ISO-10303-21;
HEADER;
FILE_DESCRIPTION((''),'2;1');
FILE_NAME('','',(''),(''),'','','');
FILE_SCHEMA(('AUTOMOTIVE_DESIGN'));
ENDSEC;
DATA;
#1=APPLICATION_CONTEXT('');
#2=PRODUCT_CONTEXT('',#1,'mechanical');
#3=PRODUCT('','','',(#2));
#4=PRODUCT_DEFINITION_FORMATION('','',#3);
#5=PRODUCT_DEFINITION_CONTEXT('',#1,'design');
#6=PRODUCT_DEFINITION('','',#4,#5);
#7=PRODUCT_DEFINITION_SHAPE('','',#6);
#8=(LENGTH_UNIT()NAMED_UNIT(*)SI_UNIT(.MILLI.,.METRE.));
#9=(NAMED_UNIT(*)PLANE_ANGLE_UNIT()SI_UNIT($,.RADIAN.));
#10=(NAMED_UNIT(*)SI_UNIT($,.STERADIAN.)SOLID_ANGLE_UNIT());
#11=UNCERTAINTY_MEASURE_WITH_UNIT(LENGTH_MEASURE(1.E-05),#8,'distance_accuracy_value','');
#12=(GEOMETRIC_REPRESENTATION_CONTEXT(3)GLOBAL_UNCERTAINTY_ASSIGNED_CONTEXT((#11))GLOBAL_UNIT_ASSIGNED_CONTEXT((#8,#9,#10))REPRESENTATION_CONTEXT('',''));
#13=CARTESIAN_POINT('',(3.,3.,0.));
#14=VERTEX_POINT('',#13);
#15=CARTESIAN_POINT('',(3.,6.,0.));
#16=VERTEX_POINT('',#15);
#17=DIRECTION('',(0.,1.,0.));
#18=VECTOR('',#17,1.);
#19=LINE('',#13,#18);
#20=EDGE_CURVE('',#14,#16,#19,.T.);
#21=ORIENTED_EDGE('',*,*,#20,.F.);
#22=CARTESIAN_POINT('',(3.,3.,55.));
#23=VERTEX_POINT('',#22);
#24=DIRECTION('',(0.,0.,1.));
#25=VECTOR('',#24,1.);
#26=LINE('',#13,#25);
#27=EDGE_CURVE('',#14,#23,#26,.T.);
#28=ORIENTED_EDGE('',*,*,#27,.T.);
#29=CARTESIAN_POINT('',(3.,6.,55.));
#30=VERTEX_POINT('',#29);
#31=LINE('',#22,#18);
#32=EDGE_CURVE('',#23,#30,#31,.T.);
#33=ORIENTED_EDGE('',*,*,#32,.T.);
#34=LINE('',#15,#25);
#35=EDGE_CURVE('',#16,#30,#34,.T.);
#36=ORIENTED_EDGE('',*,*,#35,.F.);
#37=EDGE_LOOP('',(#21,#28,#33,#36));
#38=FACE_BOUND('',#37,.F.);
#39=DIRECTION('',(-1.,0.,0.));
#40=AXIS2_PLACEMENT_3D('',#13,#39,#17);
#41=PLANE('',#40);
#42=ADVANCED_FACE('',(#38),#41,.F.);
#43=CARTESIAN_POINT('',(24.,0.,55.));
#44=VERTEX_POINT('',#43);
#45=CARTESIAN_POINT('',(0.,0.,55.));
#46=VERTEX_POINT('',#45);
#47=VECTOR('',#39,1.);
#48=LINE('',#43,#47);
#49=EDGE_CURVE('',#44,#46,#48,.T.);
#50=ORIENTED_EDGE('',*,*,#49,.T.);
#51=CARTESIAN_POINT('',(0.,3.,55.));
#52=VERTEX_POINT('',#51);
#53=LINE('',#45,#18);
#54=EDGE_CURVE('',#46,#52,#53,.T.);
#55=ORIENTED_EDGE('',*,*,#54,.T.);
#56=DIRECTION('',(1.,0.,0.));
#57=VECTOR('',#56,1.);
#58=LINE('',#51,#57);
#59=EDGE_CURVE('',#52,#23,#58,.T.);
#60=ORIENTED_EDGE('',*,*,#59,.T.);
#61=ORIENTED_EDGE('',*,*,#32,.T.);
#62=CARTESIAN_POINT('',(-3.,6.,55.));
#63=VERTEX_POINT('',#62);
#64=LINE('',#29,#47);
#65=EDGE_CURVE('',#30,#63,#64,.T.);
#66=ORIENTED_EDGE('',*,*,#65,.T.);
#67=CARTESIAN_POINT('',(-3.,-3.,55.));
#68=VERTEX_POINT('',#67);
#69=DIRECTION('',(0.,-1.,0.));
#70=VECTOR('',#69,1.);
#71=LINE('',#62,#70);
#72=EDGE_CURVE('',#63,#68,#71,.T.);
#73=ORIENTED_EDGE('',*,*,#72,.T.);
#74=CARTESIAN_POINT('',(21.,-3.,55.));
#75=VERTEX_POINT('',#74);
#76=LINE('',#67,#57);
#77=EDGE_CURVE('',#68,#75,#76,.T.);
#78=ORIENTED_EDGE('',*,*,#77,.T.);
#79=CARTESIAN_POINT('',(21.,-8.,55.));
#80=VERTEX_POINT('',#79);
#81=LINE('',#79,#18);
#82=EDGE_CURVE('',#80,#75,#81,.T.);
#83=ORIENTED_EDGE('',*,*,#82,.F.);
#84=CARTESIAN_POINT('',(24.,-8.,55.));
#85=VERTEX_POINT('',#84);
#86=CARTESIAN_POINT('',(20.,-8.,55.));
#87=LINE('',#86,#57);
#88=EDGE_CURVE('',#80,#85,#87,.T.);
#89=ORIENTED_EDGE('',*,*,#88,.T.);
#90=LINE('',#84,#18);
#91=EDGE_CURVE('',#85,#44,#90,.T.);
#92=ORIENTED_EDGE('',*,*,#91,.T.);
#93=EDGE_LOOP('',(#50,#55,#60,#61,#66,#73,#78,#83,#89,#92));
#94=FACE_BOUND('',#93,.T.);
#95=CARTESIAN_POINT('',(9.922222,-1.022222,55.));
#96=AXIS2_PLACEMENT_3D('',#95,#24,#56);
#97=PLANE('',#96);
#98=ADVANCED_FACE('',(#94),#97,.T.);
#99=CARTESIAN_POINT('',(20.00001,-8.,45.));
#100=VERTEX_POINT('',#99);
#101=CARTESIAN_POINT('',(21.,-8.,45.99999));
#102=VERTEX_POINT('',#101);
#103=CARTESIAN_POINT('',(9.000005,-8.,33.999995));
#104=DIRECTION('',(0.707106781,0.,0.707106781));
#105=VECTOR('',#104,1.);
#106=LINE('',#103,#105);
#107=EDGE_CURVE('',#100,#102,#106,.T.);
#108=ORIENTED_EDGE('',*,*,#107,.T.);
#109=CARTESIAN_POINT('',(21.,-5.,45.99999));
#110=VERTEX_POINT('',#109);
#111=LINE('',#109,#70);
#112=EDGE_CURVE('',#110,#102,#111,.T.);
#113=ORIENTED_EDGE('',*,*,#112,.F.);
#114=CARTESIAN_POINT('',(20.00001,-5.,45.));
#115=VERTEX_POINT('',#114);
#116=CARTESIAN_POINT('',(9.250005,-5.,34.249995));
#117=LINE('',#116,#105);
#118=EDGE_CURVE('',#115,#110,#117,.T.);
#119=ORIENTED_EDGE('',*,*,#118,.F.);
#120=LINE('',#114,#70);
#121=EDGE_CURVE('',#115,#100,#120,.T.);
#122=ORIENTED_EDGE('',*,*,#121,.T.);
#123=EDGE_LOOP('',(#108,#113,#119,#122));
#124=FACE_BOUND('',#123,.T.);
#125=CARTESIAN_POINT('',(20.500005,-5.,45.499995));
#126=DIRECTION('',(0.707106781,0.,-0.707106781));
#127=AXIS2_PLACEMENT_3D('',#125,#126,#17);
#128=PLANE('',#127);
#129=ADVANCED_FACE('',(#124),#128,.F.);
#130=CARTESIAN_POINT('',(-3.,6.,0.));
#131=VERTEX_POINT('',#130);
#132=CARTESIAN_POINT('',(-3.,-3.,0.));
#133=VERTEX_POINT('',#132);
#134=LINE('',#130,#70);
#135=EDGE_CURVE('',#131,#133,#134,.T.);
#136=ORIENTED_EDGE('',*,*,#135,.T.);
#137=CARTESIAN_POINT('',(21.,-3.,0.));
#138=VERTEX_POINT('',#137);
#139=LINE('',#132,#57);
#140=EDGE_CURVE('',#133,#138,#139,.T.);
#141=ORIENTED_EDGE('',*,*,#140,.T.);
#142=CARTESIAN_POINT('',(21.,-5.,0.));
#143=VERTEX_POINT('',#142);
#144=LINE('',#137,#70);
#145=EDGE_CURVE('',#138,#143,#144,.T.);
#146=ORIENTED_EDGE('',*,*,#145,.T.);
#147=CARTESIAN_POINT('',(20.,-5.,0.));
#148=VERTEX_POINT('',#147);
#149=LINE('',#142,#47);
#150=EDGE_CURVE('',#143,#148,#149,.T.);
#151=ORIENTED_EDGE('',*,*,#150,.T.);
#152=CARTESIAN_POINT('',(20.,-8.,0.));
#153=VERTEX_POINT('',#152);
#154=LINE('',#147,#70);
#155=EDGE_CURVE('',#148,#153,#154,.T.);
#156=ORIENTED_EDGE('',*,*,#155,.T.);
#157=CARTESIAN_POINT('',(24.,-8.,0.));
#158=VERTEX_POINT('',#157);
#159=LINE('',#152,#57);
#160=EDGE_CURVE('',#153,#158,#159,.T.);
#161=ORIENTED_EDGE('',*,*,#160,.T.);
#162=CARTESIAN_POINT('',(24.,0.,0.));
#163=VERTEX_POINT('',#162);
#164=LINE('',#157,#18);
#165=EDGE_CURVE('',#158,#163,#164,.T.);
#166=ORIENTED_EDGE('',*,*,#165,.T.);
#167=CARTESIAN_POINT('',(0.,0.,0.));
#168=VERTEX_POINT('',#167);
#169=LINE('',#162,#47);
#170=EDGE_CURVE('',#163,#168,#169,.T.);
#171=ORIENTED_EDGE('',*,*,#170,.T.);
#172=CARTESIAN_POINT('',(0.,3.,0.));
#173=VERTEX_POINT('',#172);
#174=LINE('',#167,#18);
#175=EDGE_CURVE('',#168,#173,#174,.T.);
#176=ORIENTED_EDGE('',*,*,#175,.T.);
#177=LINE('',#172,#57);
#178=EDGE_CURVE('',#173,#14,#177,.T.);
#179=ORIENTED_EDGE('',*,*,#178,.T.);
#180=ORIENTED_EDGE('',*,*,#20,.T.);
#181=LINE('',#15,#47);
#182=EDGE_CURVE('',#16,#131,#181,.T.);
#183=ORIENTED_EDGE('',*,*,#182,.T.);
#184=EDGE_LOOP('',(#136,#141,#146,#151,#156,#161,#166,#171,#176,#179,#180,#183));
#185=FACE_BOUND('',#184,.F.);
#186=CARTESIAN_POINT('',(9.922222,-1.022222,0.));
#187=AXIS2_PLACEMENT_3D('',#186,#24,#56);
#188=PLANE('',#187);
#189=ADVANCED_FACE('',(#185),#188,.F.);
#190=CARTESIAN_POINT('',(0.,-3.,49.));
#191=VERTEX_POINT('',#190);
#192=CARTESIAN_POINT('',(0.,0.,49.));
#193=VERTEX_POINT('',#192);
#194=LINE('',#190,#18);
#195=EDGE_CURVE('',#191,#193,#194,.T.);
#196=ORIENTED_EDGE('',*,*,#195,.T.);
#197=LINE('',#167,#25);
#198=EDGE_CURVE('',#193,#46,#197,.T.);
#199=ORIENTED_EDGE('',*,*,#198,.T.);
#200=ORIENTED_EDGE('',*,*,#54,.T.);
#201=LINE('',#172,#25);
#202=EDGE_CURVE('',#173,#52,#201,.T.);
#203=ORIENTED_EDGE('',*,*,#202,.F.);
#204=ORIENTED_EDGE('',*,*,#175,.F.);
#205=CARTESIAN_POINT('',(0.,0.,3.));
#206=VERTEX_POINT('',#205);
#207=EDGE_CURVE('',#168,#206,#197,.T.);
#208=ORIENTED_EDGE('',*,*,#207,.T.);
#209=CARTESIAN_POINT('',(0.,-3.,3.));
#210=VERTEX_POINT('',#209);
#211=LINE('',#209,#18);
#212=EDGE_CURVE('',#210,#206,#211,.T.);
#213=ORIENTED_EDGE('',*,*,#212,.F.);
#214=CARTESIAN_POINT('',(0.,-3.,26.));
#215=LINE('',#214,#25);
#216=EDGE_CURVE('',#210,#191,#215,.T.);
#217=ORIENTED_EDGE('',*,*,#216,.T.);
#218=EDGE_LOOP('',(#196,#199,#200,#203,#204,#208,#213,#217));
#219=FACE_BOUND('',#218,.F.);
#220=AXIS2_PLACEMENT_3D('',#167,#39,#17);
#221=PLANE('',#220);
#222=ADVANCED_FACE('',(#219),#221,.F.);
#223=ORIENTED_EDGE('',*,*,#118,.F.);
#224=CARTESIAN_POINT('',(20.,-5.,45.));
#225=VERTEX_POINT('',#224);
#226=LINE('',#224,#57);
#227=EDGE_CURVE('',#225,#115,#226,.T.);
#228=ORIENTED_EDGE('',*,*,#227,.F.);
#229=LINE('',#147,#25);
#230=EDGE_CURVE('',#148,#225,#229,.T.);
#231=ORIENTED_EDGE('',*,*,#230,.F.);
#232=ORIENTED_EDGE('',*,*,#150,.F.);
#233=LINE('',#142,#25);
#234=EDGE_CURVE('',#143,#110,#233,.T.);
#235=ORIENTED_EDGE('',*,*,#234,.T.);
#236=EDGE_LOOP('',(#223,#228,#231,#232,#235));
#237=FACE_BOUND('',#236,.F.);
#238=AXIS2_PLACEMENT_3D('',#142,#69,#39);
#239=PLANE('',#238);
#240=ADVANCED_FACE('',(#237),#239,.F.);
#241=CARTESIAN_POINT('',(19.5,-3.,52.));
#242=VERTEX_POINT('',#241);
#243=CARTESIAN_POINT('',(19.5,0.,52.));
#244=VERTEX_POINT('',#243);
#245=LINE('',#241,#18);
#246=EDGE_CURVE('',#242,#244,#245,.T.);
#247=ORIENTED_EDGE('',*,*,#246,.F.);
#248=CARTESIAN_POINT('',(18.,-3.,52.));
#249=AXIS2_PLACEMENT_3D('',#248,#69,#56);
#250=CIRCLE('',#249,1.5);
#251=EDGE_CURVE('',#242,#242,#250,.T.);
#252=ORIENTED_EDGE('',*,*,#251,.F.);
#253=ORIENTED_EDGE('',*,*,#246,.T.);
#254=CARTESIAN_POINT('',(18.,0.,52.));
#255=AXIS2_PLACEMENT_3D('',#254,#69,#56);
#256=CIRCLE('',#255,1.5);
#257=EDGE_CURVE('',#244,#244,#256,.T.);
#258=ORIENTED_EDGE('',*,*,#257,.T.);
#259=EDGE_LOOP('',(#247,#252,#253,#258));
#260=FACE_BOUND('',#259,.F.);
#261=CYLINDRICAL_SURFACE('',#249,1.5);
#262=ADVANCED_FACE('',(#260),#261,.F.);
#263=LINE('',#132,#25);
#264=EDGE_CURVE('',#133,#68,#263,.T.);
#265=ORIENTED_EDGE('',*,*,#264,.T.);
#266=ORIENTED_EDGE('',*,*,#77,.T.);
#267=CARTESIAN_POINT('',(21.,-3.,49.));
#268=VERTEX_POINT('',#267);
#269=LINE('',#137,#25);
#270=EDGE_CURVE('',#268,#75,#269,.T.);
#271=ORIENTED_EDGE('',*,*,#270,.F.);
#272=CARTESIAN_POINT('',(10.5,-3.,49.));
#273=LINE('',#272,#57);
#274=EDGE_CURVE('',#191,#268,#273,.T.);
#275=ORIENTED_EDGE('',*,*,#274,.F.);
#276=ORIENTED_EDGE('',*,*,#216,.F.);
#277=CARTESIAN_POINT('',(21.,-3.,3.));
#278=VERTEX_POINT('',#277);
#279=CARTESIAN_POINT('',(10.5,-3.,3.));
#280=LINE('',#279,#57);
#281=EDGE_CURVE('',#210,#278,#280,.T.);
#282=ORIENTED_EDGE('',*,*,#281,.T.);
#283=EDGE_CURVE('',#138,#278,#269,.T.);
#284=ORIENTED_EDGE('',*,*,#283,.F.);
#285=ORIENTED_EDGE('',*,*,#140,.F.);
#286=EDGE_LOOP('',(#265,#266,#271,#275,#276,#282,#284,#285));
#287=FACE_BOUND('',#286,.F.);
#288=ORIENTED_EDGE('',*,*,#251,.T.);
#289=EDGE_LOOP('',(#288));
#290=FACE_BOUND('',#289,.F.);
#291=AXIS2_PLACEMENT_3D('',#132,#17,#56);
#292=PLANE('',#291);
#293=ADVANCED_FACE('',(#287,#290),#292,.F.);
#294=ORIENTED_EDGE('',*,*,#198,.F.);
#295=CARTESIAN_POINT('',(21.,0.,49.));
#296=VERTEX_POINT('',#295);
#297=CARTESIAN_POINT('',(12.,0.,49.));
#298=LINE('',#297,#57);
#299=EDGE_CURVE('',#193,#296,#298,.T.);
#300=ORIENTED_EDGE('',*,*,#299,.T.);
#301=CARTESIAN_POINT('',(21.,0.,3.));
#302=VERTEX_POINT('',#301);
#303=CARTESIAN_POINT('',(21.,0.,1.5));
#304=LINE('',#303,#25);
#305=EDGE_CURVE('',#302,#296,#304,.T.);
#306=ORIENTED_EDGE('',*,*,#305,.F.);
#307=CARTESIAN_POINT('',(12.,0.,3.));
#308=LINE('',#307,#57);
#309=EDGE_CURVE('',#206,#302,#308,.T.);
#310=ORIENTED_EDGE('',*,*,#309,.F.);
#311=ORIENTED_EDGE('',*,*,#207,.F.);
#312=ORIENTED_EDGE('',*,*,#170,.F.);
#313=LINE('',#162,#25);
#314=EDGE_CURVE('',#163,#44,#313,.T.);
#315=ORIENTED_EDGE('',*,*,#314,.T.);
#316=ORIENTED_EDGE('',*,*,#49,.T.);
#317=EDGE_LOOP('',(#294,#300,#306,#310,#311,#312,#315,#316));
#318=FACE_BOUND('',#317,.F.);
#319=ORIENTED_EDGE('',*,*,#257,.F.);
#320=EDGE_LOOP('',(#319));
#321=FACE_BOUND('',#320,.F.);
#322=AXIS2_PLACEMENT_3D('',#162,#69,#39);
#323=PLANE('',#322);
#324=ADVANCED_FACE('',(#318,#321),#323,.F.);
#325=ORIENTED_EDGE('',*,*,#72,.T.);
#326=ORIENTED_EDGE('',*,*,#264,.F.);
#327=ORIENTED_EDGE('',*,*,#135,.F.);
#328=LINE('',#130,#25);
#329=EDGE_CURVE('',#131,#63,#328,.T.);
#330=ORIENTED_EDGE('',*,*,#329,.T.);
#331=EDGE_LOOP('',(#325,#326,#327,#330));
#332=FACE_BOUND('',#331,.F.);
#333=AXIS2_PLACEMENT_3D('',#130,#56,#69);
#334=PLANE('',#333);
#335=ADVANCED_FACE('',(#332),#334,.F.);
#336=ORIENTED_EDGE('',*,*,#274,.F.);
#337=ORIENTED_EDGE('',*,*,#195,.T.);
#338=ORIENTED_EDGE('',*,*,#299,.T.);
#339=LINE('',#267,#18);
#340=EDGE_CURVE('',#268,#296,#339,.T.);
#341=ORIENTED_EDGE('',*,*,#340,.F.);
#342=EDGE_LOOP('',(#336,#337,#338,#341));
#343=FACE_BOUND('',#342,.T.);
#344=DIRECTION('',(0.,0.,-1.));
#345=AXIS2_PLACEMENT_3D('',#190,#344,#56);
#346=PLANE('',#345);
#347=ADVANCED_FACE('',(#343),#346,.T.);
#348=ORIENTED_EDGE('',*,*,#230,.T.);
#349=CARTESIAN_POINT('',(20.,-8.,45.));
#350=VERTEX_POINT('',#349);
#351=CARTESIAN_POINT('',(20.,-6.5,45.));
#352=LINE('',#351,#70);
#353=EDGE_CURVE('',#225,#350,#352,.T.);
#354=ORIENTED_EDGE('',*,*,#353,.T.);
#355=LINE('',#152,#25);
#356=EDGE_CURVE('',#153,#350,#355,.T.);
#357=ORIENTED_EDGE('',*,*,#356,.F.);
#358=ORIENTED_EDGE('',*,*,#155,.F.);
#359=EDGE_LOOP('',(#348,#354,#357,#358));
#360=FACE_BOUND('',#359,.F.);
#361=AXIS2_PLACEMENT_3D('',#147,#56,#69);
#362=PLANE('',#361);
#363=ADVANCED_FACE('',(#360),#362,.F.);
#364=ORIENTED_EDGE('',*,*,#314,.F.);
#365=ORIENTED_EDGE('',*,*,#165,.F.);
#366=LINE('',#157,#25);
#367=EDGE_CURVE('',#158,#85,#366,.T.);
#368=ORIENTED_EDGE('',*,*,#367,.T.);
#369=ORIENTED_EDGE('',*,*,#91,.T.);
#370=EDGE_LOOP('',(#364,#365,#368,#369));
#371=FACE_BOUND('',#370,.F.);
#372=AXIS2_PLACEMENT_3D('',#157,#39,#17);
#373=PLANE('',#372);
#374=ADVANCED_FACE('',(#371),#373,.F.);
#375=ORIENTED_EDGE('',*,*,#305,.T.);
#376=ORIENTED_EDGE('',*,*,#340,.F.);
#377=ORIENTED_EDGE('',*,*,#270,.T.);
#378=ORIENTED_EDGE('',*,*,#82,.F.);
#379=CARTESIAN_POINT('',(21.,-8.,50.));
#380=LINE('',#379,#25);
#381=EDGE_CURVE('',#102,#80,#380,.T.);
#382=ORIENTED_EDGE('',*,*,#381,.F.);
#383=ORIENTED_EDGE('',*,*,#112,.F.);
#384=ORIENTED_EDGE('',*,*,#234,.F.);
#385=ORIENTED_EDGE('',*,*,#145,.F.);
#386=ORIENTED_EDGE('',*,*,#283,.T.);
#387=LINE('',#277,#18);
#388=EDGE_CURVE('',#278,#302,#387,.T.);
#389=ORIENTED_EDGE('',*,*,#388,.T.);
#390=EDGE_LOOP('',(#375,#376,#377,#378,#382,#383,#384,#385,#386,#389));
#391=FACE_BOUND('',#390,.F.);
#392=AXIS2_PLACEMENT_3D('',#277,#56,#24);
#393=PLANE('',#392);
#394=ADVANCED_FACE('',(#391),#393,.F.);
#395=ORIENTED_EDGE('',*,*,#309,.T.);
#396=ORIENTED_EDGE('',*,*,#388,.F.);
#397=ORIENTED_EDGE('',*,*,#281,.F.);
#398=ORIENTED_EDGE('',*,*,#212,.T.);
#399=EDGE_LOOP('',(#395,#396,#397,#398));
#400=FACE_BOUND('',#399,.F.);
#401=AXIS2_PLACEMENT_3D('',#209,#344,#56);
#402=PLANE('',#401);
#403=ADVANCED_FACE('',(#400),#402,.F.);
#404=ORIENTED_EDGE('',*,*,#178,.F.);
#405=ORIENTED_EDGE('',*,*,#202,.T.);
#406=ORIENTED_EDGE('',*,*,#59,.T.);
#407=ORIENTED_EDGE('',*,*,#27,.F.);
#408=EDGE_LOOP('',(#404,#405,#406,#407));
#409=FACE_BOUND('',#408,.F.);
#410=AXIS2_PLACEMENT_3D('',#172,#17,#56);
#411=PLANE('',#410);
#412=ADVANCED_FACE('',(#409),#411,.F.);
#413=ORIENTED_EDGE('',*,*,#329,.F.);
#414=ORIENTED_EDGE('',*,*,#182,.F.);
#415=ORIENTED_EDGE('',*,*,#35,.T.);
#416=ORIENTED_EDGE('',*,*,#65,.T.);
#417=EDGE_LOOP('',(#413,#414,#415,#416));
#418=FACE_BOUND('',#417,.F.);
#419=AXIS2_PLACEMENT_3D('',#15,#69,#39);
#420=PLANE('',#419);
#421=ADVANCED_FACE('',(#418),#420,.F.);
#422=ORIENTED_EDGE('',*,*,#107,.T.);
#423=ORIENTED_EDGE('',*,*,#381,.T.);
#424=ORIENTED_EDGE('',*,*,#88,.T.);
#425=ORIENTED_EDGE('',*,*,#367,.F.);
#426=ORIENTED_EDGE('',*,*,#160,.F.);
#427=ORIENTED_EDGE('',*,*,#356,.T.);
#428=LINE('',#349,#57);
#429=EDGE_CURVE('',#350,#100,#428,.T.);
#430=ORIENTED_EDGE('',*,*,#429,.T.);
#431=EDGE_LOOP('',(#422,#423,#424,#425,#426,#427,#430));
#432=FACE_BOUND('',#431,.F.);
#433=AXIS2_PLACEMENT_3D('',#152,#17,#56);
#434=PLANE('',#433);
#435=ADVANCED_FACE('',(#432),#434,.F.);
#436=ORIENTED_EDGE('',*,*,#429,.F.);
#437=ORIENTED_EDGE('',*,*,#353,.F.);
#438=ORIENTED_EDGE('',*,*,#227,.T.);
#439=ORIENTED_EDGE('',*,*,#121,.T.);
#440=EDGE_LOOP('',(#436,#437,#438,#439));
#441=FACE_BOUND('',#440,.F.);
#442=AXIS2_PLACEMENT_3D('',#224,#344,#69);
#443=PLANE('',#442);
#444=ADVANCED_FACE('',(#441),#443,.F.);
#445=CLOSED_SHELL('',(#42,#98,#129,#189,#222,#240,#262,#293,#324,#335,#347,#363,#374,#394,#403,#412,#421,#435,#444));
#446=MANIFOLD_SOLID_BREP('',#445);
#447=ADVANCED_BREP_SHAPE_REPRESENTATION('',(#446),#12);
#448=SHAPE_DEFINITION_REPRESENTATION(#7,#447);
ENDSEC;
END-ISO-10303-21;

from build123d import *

# Parameters (mm, degrees)
F1_DEPTH = 55
F2_R     = 1.5
F2_W     = 21
F2_H     = 46
F3_DEPTH = 5
F4_W     = 3
F4_H     = 10
F5_DEPTH = 1
F6_SIZE  = 0.99999


# Not quite as in the source:
# - a fillet or chamfer is up to 0.001 mm smaller than in the source, because OpenCascade refuses the exact size


with BuildPart() as f1:
    # F0 (on Top) → F1 (new body)
    with BuildSketch(Plane.XY):
        Polygon((24, 0), (0, 0), (0, 2.9999995536), (3, 2.9999995536), (3, 5.9999995536), (-3, 5.9999995536), (-3, -3.0000002232), (21, -3.0000002232), (21, -5.0000002232), (20, -5.0000002232), (20, -8.0000002232), (24, -8.0000002232), align=None)
    extrude(amount=F1_DEPTH)

    # F2 (on face) → F3 (cut)
    with BuildSketch(Plane.XZ.offset(3.0000002232)):
        with Locations((18, 52)):
            Circle(F2_R)
        with Locations((10.5, 26)):
            Rectangle(F2_W, F2_H)
    extrude(amount=-F3_DEPTH, mode=Mode.SUBTRACT)

    # F4 (on face) → F5 (cut)
    with BuildSketch(Plane(origin=(20, 0, 0), x_dir=(0, -1, 0), z_dir=(-1, 0, 0))):
        with Locations((6.5000002232, 50)):
            Rectangle(F4_W, F4_H)
    extrude(amount=-F5_DEPTH, mode=Mode.SUBTRACT)

    # F6 (size 1 in the source; OpenCascade refuses exactly that, so slightly less here)
    f6_edges = [f1.edges().sort_by_distance(p)[0] for p in [
        (21, -6.5, 45),
    ]]
    chamfer(f6_edges, length=F6_SIZE)


solid = f1.part
